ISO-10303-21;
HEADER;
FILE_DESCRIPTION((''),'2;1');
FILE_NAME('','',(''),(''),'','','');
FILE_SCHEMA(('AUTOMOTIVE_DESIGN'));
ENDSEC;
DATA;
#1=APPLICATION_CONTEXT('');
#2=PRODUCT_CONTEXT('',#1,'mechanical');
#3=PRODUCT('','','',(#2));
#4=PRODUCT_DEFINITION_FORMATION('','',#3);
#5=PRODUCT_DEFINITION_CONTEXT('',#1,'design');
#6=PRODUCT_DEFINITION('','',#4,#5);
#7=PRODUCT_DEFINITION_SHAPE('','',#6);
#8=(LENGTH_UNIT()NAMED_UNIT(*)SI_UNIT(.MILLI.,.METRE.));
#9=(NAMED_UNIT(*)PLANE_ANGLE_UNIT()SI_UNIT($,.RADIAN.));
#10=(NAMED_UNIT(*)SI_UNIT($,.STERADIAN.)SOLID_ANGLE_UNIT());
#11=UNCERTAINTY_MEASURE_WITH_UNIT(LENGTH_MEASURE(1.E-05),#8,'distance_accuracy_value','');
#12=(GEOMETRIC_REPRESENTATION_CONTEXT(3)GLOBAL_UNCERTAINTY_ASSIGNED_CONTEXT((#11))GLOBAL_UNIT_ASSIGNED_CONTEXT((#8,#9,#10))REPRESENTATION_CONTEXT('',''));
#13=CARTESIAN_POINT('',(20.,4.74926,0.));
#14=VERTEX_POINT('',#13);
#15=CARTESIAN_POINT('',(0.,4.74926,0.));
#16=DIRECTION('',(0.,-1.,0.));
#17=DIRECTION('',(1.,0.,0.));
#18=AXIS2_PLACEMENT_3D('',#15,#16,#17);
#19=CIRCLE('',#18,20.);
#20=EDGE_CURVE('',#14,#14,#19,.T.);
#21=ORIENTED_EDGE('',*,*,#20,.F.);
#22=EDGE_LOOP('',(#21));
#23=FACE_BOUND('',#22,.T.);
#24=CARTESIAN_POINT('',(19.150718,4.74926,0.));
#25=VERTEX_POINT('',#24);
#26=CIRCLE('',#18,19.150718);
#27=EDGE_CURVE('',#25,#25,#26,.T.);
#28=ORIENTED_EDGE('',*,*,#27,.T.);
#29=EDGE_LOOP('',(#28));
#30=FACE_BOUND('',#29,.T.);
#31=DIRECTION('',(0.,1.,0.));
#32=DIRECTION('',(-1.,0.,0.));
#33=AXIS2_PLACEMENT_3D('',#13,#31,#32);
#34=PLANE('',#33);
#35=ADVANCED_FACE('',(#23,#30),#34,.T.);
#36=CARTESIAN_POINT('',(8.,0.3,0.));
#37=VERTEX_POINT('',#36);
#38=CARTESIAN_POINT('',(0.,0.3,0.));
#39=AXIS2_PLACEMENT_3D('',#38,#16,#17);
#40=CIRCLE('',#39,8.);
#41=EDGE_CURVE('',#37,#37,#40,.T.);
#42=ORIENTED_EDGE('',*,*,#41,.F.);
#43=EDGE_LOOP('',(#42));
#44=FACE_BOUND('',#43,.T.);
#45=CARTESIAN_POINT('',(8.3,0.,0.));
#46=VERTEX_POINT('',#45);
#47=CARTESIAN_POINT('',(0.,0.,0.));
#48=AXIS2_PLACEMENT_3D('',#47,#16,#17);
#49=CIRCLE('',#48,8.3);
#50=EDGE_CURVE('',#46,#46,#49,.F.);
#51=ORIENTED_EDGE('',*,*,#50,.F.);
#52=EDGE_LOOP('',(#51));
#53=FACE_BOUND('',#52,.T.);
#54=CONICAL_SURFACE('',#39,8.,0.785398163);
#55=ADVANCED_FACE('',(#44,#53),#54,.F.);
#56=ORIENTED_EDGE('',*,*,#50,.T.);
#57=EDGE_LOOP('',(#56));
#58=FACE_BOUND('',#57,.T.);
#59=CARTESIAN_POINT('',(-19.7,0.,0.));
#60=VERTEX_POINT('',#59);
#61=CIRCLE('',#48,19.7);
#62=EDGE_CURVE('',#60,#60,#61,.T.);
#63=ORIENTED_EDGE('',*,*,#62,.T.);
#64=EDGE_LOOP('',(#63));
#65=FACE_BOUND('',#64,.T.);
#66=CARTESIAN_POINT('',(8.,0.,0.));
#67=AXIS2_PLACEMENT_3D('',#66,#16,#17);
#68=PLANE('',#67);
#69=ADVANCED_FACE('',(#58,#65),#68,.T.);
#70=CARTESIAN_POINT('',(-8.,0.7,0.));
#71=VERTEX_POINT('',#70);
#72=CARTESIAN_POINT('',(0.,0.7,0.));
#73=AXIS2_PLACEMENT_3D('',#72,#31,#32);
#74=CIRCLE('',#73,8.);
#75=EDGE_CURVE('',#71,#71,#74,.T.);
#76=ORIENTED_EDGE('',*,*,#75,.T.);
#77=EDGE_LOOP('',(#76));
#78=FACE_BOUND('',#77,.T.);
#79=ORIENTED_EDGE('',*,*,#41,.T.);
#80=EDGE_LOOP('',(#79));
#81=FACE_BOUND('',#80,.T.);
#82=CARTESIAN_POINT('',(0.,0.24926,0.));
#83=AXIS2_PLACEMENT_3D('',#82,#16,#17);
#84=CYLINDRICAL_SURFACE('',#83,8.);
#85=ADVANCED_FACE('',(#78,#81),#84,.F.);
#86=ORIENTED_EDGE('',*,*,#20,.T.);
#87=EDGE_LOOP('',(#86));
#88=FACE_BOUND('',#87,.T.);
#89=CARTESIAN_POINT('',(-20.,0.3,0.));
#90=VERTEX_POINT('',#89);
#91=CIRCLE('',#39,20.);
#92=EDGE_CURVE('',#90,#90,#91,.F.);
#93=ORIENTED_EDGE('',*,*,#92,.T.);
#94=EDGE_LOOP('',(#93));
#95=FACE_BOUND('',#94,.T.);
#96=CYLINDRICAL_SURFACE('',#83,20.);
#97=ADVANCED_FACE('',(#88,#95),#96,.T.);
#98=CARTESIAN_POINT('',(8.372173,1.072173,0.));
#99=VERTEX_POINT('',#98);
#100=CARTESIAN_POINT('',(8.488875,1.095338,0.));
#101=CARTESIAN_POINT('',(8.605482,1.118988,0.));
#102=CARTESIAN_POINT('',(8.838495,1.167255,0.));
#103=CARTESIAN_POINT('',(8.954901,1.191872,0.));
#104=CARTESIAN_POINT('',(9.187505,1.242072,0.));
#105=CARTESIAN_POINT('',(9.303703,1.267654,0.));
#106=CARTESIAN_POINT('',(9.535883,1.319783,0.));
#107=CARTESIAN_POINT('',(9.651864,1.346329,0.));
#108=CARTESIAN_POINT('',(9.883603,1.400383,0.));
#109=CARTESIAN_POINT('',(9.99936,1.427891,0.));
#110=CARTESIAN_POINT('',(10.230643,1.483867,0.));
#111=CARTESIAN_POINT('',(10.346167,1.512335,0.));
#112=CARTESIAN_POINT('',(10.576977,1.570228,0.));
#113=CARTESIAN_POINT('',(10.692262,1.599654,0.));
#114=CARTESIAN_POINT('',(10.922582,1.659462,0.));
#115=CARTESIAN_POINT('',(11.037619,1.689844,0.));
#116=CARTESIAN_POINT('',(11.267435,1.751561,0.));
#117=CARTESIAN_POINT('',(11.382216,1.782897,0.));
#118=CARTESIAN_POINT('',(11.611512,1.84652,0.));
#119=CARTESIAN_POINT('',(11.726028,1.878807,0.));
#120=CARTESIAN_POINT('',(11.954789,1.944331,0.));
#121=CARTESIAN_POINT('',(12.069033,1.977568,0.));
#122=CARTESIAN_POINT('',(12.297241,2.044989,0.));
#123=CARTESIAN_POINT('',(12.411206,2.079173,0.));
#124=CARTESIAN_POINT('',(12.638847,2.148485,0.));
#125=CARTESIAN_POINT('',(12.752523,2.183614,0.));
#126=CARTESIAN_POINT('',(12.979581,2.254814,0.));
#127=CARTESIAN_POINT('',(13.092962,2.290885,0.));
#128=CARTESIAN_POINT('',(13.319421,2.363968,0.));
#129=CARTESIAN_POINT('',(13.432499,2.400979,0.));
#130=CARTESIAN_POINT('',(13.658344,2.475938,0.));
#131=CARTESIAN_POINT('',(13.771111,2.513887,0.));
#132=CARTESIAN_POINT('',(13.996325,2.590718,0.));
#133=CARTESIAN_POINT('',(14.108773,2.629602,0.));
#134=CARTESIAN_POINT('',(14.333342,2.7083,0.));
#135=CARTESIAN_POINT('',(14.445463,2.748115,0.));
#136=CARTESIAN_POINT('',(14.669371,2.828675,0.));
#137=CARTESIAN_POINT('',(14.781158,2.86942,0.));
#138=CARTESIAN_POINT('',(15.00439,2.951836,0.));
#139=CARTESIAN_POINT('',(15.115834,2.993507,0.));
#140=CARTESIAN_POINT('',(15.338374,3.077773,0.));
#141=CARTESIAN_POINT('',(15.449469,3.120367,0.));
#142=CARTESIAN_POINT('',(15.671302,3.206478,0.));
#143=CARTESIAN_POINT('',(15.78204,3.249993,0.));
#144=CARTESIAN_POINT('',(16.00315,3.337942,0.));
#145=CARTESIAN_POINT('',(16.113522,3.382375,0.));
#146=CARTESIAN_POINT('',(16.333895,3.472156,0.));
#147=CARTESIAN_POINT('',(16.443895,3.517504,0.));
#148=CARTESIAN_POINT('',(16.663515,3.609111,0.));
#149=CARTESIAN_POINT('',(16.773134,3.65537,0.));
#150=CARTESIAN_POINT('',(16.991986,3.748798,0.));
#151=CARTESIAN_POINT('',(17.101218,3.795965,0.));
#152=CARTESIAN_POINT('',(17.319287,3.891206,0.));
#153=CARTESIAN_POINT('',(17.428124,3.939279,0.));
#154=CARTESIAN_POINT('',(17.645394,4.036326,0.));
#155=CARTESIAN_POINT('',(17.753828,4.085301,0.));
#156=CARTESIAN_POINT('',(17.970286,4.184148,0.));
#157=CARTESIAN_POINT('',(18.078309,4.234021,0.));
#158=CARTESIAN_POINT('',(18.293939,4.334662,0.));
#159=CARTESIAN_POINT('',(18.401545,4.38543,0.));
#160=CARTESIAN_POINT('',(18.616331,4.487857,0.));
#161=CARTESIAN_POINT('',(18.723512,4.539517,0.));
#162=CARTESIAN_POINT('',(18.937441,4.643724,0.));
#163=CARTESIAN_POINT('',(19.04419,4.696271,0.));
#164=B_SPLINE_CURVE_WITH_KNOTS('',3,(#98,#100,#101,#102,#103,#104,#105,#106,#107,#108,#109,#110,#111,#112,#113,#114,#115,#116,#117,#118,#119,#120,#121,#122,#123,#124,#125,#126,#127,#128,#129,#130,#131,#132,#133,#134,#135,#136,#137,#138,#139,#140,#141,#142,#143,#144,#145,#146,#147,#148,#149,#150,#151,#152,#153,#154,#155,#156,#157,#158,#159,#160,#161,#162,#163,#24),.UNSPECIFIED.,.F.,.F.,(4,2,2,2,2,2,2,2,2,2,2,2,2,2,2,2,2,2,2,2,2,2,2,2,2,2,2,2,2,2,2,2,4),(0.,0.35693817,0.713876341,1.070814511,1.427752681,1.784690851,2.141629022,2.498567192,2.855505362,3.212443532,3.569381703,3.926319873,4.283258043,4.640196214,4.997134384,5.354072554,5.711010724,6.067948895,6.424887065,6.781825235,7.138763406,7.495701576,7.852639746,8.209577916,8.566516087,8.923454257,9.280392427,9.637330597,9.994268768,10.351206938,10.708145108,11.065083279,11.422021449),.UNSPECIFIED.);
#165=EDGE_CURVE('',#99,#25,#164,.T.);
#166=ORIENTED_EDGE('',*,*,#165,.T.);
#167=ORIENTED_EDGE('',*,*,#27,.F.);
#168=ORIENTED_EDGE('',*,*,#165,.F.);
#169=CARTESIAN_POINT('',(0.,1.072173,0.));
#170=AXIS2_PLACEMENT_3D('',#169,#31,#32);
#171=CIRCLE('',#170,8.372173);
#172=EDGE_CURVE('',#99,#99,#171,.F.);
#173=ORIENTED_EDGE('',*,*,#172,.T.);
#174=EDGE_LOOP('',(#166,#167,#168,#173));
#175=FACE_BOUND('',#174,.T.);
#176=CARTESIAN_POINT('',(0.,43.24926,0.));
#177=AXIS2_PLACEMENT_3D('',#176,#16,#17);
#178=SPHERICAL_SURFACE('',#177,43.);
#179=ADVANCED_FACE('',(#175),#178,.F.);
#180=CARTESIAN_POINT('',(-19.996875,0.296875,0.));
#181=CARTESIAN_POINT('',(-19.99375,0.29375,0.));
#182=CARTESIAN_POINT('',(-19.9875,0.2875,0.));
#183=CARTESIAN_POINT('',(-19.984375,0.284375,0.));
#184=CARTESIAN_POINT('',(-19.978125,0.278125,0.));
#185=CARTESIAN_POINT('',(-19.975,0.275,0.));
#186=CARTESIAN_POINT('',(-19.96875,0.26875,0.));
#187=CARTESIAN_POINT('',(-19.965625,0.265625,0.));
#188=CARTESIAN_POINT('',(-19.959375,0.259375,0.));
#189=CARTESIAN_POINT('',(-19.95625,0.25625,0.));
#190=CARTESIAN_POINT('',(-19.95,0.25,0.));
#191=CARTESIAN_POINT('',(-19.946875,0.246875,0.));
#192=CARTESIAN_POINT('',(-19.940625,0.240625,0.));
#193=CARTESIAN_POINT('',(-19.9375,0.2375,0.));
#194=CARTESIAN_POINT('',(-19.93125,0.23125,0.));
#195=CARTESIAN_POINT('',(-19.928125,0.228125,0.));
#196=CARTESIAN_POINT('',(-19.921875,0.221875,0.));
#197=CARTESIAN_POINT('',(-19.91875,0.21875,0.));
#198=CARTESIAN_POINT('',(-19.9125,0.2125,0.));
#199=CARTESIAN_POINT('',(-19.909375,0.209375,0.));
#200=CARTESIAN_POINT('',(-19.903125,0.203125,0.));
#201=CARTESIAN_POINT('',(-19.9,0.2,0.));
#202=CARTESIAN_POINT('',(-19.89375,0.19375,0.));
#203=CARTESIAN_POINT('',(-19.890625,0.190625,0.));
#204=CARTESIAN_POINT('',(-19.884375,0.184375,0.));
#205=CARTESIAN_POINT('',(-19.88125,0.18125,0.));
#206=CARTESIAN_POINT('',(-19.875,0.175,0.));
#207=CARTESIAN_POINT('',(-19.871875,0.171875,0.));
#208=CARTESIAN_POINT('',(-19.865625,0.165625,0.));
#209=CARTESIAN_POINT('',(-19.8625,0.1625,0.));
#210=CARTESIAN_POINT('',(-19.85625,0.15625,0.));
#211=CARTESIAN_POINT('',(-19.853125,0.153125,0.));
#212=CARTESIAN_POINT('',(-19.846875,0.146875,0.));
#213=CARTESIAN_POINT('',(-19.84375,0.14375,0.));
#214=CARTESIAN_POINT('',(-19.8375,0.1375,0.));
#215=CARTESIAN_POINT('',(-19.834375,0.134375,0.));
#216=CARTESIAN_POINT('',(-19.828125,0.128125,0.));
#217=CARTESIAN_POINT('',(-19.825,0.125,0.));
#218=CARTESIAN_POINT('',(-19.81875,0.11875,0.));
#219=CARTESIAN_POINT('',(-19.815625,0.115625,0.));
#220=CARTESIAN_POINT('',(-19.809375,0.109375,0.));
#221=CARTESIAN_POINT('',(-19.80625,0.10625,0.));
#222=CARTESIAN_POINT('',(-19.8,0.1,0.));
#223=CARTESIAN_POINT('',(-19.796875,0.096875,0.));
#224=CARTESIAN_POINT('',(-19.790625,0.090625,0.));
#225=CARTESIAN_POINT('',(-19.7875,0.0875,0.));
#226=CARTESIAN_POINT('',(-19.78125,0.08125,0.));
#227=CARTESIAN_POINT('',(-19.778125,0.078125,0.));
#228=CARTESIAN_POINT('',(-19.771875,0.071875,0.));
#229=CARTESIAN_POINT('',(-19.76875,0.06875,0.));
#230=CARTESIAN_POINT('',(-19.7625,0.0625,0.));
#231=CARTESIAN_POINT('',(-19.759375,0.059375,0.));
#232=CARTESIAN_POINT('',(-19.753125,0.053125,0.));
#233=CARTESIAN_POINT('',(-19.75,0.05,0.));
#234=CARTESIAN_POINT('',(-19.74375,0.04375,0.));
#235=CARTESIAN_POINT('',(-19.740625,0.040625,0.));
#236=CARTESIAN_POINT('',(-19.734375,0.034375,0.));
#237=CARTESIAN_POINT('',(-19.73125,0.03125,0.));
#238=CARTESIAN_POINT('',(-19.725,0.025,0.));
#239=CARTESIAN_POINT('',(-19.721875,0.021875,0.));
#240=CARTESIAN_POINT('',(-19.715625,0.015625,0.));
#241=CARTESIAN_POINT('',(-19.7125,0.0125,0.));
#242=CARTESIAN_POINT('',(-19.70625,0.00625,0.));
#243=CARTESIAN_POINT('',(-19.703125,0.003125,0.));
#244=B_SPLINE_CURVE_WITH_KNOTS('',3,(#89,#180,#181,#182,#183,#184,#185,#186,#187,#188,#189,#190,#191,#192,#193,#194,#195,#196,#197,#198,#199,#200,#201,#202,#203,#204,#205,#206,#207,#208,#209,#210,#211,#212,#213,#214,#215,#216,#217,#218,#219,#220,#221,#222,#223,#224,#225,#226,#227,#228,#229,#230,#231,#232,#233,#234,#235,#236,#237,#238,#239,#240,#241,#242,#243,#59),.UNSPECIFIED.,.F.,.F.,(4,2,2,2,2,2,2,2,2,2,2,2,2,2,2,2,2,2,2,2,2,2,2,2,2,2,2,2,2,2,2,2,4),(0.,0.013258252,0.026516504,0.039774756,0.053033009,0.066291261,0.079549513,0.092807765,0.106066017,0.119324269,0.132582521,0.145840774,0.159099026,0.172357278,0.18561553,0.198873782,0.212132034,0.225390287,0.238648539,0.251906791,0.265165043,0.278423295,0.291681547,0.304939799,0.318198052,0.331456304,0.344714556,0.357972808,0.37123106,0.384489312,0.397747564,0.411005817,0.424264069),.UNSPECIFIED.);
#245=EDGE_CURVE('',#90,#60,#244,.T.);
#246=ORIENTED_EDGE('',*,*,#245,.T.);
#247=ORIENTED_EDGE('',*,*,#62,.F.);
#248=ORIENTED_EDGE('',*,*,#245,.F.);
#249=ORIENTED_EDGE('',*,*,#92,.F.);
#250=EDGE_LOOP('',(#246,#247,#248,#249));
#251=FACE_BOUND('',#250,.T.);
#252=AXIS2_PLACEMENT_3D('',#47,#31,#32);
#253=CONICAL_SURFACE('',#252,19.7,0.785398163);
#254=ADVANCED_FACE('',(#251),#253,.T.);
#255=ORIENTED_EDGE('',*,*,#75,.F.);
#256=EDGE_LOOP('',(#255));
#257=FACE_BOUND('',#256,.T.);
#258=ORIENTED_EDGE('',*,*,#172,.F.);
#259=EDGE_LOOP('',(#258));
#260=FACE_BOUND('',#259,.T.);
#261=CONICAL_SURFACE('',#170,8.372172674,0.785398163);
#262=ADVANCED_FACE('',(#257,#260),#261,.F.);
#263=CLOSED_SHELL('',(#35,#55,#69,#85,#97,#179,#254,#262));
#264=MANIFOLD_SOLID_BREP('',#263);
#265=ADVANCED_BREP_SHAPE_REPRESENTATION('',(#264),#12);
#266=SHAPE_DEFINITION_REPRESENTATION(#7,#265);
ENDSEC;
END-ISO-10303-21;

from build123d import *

# Parameters (mm, degrees)
SFAZOWANIE1_SIZE = 0.3


with BuildPart() as part:
    # Szkic1 → Obrót1 (revolve)
    with BuildSketch(Plane.XY):
        with BuildLine():
            Line((8, 0), (20, 0))
            Line((20, 0), (20, 4.749260349))
            Line((20, 4.749260349), (19.150718002, 4.749260349))
            ThreePointArc((19.150718002, 4.749260349), (13.704182219, 2.491495571), (8, 1))
            Line((8, 1), (8, 0))
        make_face()
    revolve(axis=Axis((0, 0.249260349, 0), (0, 1, 0)))

    # Sfazowanie1
    # the kernel refuses this chamfer: 0.37665047, 0.3 mm, written as the material it takes off along each edge
    with BuildSketch(Plane(origin=(0, 0, 0), x_dir=(1, 0, 0), z_dir=(0, 0, 1))) as sfazowanie1_piece_1:
        Polygon((20 - SFAZOWANIE1_SIZE, 0), (20, SFAZOWANIE1_SIZE), (20, 0), align=None)
    revolve(axis=Axis((0, 0, 0), (0, 1, 0)), mode=Mode.SUBTRACT)
    with BuildSketch(Plane(origin=(0, 0, 0), x_dir=(1, 0, 0), z_dir=(0, 0, 1))) as sfazowanie1_piece_2:
        Polygon((8, SFAZOWANIE1_SIZE), (8 + SFAZOWANIE1_SIZE, 0), (8, 0), align=None)
    revolve(axis=Axis((0, 0, 0), (0, 1, 0)), mode=Mode.SUBTRACT)
    with BuildSketch(Plane(origin=(0, 1, 0), x_dir=(1, 0, 0), z_dir=(0, 0, 1))) as sfazowanie1_piece_3:
        with BuildLine():
            Line((8.372172674, 0.072172674), (8, -SFAZOWANIE1_SIZE))
            Line((8, -SFAZOWANIE1_SIZE), (8, 0))
            ThreePointArc((8, 0), (8.192295557, 0.036865326), (8.372172674, 0.072172674))
        make_face()
    revolve(axis=Axis((0, 1, 0), (0, 1, 0)), mode=Mode.SUBTRACT)


solid = part.part
